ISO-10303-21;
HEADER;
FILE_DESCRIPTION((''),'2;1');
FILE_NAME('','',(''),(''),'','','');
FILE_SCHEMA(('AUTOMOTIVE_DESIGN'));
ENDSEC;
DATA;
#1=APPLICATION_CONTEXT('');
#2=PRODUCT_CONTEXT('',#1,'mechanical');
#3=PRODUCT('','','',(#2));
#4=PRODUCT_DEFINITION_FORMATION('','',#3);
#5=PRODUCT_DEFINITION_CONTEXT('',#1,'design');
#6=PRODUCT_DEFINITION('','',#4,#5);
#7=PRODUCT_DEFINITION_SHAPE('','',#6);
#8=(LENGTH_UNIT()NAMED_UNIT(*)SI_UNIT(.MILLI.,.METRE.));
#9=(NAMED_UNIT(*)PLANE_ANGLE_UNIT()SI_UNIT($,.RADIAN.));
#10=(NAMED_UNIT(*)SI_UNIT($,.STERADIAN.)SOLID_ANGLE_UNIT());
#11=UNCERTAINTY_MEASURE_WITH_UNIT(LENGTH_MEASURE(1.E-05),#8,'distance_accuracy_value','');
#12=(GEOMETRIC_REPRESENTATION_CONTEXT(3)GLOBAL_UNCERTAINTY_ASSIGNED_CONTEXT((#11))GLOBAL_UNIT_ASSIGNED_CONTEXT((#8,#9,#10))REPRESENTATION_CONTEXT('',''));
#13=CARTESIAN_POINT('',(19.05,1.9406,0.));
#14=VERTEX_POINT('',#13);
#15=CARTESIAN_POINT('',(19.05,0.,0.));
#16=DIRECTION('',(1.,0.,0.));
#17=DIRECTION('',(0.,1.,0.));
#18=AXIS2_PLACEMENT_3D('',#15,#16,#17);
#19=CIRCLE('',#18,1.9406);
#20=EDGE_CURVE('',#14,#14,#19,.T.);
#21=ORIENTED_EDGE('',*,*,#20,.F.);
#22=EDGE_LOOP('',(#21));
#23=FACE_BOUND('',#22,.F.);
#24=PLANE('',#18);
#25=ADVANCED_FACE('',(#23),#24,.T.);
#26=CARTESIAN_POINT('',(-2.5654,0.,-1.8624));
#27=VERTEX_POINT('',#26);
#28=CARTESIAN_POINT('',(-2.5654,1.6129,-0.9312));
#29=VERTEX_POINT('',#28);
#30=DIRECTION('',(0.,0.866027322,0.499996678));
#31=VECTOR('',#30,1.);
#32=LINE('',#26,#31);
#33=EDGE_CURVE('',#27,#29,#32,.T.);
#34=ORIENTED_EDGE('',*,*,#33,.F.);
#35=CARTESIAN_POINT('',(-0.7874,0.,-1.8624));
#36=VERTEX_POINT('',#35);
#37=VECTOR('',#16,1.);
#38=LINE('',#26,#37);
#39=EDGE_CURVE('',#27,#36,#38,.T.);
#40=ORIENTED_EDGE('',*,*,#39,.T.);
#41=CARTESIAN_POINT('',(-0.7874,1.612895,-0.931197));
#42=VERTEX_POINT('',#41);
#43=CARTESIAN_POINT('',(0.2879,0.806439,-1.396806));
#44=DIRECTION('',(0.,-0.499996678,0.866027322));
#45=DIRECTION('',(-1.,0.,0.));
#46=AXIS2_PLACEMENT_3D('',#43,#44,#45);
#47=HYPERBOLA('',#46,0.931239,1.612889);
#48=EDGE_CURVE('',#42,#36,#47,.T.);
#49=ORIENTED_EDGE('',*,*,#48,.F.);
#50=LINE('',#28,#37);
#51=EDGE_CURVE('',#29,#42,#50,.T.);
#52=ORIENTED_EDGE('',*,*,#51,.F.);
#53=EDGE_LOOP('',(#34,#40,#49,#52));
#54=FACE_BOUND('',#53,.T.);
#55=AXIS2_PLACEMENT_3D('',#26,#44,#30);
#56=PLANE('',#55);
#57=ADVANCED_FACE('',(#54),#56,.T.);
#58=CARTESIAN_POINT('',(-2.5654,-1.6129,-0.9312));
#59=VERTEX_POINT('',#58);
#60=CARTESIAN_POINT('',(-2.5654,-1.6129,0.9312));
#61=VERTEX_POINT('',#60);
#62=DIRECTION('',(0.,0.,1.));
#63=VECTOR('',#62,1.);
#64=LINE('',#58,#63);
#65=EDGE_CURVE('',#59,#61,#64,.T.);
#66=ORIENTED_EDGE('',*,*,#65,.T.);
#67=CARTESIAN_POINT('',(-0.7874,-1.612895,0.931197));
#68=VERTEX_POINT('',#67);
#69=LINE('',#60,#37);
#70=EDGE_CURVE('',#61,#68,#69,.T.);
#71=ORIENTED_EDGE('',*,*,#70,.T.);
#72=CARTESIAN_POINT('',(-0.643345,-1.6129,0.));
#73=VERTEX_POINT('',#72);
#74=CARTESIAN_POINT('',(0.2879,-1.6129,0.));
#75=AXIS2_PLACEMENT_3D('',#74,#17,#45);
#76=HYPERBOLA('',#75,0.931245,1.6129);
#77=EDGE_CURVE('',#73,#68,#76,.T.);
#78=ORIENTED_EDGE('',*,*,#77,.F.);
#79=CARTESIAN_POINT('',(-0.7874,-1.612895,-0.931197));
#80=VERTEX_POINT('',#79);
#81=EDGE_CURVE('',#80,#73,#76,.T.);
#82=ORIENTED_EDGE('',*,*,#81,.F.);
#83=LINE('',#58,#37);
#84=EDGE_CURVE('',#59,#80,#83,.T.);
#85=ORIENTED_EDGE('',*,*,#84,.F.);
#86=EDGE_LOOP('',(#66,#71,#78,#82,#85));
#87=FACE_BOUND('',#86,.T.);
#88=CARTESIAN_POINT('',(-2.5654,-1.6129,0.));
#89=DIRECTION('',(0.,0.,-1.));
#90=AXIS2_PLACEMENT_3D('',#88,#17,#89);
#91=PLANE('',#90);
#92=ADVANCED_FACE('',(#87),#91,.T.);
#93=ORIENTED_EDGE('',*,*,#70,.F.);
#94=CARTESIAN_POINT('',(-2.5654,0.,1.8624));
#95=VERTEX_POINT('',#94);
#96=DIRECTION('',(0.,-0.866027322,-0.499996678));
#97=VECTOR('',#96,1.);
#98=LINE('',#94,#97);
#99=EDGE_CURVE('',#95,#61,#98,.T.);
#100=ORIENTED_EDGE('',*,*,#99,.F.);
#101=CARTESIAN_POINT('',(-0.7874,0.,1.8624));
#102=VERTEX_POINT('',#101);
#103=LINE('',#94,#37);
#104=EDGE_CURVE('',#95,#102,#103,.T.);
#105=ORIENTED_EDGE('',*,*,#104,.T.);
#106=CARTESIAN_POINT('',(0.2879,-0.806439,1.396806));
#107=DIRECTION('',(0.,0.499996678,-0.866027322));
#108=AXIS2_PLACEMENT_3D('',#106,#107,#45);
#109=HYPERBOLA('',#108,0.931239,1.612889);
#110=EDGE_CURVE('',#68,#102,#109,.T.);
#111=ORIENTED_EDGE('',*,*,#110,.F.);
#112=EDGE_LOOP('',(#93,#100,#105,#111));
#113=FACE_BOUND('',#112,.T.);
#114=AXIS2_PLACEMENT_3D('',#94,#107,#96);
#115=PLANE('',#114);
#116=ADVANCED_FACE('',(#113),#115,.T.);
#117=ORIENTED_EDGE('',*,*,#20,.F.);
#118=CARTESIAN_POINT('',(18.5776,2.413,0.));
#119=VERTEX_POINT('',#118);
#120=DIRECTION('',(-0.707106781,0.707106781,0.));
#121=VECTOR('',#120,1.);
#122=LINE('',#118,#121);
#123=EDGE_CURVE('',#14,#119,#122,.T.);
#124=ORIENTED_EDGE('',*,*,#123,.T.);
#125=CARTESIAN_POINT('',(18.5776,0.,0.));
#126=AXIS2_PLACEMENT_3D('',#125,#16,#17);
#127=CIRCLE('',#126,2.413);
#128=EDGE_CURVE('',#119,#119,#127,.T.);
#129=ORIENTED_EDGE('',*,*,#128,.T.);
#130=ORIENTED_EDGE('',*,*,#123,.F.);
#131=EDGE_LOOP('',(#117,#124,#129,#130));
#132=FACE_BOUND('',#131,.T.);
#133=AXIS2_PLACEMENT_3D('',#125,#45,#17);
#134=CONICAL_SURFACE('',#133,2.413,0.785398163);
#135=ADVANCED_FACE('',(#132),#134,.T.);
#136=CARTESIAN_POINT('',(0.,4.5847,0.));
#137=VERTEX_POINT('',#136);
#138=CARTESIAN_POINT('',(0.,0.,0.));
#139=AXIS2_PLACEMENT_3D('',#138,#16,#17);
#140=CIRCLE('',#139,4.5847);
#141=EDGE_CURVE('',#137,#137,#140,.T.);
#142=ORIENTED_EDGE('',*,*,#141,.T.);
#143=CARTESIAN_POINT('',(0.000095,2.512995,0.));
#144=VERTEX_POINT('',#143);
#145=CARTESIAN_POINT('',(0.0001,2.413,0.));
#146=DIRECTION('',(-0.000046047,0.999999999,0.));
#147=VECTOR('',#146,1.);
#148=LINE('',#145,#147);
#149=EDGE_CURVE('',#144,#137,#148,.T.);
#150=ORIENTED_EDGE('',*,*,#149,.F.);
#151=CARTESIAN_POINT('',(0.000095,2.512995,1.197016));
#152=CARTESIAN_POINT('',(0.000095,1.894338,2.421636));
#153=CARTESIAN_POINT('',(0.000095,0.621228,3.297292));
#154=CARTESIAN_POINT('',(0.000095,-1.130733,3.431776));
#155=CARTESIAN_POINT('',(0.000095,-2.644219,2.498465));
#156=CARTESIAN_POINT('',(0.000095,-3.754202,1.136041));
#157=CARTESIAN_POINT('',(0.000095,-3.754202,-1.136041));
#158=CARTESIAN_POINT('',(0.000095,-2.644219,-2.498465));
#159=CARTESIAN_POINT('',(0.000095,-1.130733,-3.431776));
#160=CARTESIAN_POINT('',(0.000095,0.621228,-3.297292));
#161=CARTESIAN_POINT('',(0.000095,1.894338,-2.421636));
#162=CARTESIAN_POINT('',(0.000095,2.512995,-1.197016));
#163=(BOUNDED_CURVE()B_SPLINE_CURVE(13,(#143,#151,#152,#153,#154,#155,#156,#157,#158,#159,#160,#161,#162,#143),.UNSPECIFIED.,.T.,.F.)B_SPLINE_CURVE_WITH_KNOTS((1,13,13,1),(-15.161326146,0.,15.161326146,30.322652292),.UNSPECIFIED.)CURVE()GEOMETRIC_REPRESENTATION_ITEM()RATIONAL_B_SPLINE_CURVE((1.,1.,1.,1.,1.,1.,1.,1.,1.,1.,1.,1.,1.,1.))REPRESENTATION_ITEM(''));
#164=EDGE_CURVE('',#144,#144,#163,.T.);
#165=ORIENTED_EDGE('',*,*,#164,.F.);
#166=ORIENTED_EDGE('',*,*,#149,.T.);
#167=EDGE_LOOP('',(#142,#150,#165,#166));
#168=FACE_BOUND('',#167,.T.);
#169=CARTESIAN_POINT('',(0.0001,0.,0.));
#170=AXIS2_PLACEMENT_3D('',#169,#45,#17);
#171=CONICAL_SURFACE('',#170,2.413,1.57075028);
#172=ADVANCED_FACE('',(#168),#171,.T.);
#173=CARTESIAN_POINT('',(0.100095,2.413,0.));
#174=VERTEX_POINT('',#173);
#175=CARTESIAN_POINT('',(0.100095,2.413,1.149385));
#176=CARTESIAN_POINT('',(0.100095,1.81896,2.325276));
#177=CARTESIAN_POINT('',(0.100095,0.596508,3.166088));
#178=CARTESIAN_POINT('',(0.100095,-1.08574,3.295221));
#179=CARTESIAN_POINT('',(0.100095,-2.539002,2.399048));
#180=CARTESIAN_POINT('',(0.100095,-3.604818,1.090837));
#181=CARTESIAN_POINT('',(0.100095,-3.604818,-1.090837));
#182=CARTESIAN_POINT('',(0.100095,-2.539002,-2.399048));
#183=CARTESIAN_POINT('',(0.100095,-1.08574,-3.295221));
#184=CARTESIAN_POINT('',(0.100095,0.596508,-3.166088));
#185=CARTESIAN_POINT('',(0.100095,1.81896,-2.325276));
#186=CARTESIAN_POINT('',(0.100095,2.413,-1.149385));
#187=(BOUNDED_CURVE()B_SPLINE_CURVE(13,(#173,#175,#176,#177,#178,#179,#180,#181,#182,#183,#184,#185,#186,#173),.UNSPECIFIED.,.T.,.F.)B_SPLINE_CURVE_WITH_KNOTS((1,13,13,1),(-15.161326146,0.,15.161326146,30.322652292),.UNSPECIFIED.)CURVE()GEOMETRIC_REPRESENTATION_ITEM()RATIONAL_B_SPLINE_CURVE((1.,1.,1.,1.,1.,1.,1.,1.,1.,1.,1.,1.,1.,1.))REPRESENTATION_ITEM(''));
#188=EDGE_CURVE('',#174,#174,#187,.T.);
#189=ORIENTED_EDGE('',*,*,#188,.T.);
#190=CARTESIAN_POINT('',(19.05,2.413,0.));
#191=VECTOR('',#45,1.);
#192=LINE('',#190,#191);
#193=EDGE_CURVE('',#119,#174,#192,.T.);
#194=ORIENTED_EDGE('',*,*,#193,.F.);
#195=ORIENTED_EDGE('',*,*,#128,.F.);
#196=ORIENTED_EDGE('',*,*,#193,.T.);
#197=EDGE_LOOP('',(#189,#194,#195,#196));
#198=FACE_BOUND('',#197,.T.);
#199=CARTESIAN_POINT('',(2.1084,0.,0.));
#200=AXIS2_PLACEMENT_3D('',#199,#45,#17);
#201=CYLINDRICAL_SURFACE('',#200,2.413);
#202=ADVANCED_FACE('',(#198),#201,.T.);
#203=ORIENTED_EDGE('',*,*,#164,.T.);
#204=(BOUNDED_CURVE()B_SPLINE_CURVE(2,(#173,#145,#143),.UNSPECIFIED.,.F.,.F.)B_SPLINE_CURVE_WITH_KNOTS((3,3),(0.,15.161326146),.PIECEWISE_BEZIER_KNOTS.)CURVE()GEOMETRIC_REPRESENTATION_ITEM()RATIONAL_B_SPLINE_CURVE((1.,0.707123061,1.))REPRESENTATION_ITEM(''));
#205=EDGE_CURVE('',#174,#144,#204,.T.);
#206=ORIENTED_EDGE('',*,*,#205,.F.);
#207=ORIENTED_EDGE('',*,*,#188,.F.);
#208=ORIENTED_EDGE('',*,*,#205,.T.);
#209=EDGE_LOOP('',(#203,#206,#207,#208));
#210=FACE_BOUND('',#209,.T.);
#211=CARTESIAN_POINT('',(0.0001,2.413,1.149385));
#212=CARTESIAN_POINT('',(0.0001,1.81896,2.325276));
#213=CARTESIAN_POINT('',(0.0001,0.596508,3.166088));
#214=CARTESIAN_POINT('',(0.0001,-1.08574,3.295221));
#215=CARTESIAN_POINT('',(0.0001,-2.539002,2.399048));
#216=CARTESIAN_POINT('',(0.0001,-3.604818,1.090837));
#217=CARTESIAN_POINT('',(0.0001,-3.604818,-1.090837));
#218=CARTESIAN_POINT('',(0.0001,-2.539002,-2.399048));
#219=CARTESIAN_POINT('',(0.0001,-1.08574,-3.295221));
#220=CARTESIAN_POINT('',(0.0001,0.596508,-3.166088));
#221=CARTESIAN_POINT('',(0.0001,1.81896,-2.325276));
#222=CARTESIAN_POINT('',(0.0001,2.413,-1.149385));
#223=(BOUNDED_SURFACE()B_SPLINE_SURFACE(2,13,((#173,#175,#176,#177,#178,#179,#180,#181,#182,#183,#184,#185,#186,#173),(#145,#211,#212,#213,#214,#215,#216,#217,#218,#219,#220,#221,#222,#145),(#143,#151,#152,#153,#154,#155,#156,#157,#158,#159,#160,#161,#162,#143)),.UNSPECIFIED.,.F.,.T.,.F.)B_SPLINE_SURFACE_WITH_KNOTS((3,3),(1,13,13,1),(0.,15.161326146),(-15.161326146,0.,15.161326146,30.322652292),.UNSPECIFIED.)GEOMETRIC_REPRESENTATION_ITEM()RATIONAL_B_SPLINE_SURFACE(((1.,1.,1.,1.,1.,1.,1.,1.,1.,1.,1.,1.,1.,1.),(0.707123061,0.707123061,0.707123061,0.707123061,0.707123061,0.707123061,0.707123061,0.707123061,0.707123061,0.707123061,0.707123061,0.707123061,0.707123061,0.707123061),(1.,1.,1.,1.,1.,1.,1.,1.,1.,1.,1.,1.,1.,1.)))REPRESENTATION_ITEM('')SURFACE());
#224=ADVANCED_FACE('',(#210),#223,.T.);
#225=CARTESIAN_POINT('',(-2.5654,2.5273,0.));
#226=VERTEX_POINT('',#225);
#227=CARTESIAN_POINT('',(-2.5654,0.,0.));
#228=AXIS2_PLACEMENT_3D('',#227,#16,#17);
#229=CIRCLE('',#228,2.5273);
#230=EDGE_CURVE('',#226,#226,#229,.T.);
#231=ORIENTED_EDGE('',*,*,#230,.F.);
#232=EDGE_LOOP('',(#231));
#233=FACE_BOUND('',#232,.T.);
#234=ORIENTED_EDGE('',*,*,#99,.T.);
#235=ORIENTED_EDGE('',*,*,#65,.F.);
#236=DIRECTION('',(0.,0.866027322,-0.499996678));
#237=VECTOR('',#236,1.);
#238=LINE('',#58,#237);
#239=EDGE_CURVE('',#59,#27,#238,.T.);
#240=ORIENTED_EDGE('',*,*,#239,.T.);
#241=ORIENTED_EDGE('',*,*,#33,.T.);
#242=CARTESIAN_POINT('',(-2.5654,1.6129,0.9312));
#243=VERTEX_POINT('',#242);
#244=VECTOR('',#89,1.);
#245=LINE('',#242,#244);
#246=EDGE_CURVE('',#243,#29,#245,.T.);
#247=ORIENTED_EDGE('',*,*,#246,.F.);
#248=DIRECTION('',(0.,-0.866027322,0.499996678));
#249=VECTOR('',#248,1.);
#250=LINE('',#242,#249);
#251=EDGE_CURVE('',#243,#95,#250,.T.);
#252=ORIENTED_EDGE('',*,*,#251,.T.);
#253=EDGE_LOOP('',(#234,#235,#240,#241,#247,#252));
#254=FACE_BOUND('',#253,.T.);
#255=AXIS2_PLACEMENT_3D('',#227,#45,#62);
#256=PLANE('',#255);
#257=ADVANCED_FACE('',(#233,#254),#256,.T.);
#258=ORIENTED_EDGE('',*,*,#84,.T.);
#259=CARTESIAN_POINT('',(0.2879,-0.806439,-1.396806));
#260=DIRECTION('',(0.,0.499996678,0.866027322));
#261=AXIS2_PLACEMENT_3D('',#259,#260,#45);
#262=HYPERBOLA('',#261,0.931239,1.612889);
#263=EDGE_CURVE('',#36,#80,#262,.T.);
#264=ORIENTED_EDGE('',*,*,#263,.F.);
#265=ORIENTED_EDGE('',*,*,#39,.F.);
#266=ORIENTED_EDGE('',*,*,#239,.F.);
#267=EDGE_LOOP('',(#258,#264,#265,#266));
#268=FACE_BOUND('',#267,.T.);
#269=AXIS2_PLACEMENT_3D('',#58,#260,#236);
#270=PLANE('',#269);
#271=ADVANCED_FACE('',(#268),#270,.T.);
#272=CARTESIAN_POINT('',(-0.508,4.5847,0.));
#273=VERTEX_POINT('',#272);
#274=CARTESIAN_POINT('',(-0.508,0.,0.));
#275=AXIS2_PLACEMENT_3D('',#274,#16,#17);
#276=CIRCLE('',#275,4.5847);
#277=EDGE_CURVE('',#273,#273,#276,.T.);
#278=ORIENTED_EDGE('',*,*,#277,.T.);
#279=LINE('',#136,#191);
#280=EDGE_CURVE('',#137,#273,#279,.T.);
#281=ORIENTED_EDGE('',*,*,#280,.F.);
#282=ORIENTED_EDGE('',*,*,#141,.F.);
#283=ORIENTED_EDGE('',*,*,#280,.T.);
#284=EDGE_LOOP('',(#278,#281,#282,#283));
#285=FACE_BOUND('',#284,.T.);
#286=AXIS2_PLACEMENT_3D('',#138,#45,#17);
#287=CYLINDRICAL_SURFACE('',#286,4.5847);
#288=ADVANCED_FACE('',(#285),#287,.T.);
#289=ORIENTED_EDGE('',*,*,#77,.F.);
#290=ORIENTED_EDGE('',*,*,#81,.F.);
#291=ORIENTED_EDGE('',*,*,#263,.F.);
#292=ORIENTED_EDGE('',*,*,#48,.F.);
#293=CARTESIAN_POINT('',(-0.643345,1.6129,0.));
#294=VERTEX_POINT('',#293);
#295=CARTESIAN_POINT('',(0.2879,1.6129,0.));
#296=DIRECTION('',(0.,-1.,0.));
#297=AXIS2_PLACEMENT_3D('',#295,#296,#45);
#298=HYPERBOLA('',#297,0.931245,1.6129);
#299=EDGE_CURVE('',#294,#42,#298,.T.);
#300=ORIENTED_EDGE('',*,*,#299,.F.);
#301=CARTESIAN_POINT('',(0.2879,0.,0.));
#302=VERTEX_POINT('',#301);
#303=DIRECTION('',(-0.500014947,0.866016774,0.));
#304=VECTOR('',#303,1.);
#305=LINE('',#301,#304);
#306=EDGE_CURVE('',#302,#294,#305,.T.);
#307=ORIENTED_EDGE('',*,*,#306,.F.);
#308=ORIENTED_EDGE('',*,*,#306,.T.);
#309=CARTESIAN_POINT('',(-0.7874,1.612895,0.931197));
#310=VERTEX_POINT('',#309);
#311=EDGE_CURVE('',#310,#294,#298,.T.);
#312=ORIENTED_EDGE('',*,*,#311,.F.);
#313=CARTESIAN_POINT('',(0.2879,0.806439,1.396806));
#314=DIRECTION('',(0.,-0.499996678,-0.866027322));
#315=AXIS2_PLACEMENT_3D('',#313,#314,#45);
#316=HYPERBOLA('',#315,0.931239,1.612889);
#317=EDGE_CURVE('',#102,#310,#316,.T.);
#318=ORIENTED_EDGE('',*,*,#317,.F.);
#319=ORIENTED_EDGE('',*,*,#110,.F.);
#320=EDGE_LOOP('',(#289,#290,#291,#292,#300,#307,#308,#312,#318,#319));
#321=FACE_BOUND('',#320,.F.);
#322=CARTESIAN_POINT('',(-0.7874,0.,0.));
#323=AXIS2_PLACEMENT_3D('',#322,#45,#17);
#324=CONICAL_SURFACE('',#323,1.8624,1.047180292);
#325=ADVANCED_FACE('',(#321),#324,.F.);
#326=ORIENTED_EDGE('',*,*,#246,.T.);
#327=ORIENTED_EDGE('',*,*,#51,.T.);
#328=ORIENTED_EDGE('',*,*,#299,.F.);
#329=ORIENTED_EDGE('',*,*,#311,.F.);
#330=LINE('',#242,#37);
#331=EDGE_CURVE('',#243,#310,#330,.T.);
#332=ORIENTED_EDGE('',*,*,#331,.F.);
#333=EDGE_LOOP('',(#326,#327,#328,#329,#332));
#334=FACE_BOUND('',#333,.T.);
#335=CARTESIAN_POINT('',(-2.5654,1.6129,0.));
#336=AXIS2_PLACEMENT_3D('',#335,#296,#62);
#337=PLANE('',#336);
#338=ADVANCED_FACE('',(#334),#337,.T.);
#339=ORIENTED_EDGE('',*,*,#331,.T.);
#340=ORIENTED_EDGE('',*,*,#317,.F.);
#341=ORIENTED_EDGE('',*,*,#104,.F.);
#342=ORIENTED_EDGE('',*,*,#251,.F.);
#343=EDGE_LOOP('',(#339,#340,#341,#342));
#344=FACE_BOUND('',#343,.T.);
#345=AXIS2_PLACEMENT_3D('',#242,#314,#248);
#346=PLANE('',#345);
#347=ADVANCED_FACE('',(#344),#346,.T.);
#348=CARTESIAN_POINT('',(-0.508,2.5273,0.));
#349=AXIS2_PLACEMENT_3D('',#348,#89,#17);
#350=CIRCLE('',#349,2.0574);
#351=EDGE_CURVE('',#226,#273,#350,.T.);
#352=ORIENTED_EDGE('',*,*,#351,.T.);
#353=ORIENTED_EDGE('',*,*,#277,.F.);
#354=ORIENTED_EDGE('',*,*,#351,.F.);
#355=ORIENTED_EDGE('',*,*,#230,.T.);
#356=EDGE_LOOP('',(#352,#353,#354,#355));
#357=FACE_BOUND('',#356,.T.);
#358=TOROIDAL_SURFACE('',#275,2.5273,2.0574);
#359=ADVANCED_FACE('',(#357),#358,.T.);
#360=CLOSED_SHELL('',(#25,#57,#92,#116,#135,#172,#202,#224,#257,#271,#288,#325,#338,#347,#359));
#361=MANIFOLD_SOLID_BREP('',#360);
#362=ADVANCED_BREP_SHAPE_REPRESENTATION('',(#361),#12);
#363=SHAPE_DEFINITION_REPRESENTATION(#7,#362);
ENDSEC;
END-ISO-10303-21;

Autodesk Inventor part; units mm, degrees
ref_plane "YZ Plane" through (0, 0, 0) normal (1, 0, 0) x (0, 1, 0)
ref_plane "XZ Plane" through (0, 0, 0) normal (0, 1, 0) x (-1, 0, 0)
sketch "Sketch1" plane through (0, 0, 0) normal (0, 0, 1) x (1, 0, 0)
  line L0 (0.2879, 0) -> (19.05, 0)
  line L1 (19.05, 0) -> (19.05, 2.413)
  line L2 (19.05, 2.413) -> (2.1084, 2.413)
  line L3 (2.1084, 2.413) -> (0.0001, 2.413)
  line L4 (0.0001, 2.413) -> (0, 2.413)
  line L5 (0, 2.413) -> (0, 4.5847)
  line L6 (0, 4.5847) -> (-2.5654, 4.5847)
  line L7 (-2.5654, 4.5847) -> (-2.5654, 1.8624)
  line L8 (-2.5654, 1.8624) -> (-0.7874, 1.8624)
  line L9 (-0.7874, 1.8624) -> (0.2879, 0)
  line L10 (-6.8885, 0) -> (23.3731, 0) projected
  line L11 (0, -0.9169) -> (0, 5.5016) projected
  line L12 (2.1084, 2.413) -> (0, 2.413) construction
  dimension "d1" = 16.9416
  dimension "d2" = 2.1083
  dimension "d3" = 2.5654
  dimension "d4" = 1.778
  dimension "d5" = 60
  dimension "d6" = 4.826
  dimension "d7" = 4.826
  dimension "d8" = 3.7248
  dimension "d9" = 9.1694
  dimension "d26" = 19.05
revolve "Body" add sketch "Sketch1" angle 360 about axis through (0.2879, 0, 0) along (1, 0, 0) contours L9 L11 L3 L2 L1 L0 | L9 L8 L7 L6 L5 L11
sketch "Sketch2" plane through (-2.5654, 0, 0) normal (-1, 0, 0) x (0, 0, 1)
  circle A0 centre (0, 0) radius 1.8624 projected
  line L0 (0, -6.4186) -> (0, 6.4186) projected
  line L1 (-6.4186, 0) -> (6.4186, 0) projected
  line L2 (1.8624, 0) -> (0.9312, -1.6129)
  line L3 (0.9312, -1.6129) -> (-0.9312, -1.6129)
  line L4 (-0.9312, -1.6129) -> (-1.8624, 0)
  line L5 (-1.8624, 0) -> (-0.9312, 1.6129)
  line L6 (-0.9312, 1.6129) -> (0.9312, 1.6129)
  line L7 (0.9312, 1.6129) -> (1.8624, 0)
  point P0 (0, 0)
extrude "Slot" add sketch "Sketch2" against normal up to next contours L7 A0 | A0 L2 | L6 L0 A0 | A0 L0 L3 | L0 L6 A0 | A0 L3 L0 | L4 A0 | A0 L5
fillet "Fillet1" radius 2.0574 1 edges at (-2.5654, -4.5847, 0)
thread "Thread" size "10-32 UNF" class "2A" standard "ANSI Unified Screw Threads" length 16.9416
chamfer "Chamfer1" distance 0.4724 distance2 0.4724 1 edges at (19.05, -2.413, 0) measured on face at (19.05, -1.2173, -0.6389)
ref_plane "Work Plane1" through (29, 0, 0) normal (0, -1, 0) x (1, 0, 0)
fillet "Fillet2" radius 0.1 1 edges at (0.0001, -2.413, 0)
equation "\"d30\" = R"
equation "\"d17\" = RR"
equation "\"d13\" = GEL"
equation "\"d15\" = -0.5 * SPD + 0.5 * GD"
equation "\"d16\" = GUL"
equation "\"d1\" = GEL"
equation "\"d3\" = KOH"
equation "\"d4\" = INTI"
equation "\"d6\" = GD"
equation "\"d7\" = BDM"
equation "\"d8\" = 1.1547 * SW"
equation "\"d9\" = KOD"
equation "\"d26\" = NLG"
equation "\"GD\" = NND"
equation "\"NLG\" = 19.05"
equation "\"GEL\" = 16.9416"
equation "\"KOD\" = 9.1694"
equation "\"KOH\" = 2.5654"
equation "\"INTI\" = 1.778"
equation "\"GAL\" = 2.1082"
equation "\"GUL\" = 0.47244"
equation "\"BDM\" = NND"
equation "\"SW\" = 3.2258"
equation "\"RR\" = 2.0574"
equation "\"SPD\" = 3.88112"
equation "\"R\" = 0.1"
equation "\"TOA\" = 30deg"
equation "\"GD1\" = SPD"
equation "\"THREADDIA\" = 4.826"
equation "\"KOH1\" = 0.508"
equation "\"NND\" = 4.826"
equation "\"E0\" = 3.72593"
properties part number "ANSI B18.3 - No. 10-32 - 3/4, HSBHCSI" material "Steel, Mild"
